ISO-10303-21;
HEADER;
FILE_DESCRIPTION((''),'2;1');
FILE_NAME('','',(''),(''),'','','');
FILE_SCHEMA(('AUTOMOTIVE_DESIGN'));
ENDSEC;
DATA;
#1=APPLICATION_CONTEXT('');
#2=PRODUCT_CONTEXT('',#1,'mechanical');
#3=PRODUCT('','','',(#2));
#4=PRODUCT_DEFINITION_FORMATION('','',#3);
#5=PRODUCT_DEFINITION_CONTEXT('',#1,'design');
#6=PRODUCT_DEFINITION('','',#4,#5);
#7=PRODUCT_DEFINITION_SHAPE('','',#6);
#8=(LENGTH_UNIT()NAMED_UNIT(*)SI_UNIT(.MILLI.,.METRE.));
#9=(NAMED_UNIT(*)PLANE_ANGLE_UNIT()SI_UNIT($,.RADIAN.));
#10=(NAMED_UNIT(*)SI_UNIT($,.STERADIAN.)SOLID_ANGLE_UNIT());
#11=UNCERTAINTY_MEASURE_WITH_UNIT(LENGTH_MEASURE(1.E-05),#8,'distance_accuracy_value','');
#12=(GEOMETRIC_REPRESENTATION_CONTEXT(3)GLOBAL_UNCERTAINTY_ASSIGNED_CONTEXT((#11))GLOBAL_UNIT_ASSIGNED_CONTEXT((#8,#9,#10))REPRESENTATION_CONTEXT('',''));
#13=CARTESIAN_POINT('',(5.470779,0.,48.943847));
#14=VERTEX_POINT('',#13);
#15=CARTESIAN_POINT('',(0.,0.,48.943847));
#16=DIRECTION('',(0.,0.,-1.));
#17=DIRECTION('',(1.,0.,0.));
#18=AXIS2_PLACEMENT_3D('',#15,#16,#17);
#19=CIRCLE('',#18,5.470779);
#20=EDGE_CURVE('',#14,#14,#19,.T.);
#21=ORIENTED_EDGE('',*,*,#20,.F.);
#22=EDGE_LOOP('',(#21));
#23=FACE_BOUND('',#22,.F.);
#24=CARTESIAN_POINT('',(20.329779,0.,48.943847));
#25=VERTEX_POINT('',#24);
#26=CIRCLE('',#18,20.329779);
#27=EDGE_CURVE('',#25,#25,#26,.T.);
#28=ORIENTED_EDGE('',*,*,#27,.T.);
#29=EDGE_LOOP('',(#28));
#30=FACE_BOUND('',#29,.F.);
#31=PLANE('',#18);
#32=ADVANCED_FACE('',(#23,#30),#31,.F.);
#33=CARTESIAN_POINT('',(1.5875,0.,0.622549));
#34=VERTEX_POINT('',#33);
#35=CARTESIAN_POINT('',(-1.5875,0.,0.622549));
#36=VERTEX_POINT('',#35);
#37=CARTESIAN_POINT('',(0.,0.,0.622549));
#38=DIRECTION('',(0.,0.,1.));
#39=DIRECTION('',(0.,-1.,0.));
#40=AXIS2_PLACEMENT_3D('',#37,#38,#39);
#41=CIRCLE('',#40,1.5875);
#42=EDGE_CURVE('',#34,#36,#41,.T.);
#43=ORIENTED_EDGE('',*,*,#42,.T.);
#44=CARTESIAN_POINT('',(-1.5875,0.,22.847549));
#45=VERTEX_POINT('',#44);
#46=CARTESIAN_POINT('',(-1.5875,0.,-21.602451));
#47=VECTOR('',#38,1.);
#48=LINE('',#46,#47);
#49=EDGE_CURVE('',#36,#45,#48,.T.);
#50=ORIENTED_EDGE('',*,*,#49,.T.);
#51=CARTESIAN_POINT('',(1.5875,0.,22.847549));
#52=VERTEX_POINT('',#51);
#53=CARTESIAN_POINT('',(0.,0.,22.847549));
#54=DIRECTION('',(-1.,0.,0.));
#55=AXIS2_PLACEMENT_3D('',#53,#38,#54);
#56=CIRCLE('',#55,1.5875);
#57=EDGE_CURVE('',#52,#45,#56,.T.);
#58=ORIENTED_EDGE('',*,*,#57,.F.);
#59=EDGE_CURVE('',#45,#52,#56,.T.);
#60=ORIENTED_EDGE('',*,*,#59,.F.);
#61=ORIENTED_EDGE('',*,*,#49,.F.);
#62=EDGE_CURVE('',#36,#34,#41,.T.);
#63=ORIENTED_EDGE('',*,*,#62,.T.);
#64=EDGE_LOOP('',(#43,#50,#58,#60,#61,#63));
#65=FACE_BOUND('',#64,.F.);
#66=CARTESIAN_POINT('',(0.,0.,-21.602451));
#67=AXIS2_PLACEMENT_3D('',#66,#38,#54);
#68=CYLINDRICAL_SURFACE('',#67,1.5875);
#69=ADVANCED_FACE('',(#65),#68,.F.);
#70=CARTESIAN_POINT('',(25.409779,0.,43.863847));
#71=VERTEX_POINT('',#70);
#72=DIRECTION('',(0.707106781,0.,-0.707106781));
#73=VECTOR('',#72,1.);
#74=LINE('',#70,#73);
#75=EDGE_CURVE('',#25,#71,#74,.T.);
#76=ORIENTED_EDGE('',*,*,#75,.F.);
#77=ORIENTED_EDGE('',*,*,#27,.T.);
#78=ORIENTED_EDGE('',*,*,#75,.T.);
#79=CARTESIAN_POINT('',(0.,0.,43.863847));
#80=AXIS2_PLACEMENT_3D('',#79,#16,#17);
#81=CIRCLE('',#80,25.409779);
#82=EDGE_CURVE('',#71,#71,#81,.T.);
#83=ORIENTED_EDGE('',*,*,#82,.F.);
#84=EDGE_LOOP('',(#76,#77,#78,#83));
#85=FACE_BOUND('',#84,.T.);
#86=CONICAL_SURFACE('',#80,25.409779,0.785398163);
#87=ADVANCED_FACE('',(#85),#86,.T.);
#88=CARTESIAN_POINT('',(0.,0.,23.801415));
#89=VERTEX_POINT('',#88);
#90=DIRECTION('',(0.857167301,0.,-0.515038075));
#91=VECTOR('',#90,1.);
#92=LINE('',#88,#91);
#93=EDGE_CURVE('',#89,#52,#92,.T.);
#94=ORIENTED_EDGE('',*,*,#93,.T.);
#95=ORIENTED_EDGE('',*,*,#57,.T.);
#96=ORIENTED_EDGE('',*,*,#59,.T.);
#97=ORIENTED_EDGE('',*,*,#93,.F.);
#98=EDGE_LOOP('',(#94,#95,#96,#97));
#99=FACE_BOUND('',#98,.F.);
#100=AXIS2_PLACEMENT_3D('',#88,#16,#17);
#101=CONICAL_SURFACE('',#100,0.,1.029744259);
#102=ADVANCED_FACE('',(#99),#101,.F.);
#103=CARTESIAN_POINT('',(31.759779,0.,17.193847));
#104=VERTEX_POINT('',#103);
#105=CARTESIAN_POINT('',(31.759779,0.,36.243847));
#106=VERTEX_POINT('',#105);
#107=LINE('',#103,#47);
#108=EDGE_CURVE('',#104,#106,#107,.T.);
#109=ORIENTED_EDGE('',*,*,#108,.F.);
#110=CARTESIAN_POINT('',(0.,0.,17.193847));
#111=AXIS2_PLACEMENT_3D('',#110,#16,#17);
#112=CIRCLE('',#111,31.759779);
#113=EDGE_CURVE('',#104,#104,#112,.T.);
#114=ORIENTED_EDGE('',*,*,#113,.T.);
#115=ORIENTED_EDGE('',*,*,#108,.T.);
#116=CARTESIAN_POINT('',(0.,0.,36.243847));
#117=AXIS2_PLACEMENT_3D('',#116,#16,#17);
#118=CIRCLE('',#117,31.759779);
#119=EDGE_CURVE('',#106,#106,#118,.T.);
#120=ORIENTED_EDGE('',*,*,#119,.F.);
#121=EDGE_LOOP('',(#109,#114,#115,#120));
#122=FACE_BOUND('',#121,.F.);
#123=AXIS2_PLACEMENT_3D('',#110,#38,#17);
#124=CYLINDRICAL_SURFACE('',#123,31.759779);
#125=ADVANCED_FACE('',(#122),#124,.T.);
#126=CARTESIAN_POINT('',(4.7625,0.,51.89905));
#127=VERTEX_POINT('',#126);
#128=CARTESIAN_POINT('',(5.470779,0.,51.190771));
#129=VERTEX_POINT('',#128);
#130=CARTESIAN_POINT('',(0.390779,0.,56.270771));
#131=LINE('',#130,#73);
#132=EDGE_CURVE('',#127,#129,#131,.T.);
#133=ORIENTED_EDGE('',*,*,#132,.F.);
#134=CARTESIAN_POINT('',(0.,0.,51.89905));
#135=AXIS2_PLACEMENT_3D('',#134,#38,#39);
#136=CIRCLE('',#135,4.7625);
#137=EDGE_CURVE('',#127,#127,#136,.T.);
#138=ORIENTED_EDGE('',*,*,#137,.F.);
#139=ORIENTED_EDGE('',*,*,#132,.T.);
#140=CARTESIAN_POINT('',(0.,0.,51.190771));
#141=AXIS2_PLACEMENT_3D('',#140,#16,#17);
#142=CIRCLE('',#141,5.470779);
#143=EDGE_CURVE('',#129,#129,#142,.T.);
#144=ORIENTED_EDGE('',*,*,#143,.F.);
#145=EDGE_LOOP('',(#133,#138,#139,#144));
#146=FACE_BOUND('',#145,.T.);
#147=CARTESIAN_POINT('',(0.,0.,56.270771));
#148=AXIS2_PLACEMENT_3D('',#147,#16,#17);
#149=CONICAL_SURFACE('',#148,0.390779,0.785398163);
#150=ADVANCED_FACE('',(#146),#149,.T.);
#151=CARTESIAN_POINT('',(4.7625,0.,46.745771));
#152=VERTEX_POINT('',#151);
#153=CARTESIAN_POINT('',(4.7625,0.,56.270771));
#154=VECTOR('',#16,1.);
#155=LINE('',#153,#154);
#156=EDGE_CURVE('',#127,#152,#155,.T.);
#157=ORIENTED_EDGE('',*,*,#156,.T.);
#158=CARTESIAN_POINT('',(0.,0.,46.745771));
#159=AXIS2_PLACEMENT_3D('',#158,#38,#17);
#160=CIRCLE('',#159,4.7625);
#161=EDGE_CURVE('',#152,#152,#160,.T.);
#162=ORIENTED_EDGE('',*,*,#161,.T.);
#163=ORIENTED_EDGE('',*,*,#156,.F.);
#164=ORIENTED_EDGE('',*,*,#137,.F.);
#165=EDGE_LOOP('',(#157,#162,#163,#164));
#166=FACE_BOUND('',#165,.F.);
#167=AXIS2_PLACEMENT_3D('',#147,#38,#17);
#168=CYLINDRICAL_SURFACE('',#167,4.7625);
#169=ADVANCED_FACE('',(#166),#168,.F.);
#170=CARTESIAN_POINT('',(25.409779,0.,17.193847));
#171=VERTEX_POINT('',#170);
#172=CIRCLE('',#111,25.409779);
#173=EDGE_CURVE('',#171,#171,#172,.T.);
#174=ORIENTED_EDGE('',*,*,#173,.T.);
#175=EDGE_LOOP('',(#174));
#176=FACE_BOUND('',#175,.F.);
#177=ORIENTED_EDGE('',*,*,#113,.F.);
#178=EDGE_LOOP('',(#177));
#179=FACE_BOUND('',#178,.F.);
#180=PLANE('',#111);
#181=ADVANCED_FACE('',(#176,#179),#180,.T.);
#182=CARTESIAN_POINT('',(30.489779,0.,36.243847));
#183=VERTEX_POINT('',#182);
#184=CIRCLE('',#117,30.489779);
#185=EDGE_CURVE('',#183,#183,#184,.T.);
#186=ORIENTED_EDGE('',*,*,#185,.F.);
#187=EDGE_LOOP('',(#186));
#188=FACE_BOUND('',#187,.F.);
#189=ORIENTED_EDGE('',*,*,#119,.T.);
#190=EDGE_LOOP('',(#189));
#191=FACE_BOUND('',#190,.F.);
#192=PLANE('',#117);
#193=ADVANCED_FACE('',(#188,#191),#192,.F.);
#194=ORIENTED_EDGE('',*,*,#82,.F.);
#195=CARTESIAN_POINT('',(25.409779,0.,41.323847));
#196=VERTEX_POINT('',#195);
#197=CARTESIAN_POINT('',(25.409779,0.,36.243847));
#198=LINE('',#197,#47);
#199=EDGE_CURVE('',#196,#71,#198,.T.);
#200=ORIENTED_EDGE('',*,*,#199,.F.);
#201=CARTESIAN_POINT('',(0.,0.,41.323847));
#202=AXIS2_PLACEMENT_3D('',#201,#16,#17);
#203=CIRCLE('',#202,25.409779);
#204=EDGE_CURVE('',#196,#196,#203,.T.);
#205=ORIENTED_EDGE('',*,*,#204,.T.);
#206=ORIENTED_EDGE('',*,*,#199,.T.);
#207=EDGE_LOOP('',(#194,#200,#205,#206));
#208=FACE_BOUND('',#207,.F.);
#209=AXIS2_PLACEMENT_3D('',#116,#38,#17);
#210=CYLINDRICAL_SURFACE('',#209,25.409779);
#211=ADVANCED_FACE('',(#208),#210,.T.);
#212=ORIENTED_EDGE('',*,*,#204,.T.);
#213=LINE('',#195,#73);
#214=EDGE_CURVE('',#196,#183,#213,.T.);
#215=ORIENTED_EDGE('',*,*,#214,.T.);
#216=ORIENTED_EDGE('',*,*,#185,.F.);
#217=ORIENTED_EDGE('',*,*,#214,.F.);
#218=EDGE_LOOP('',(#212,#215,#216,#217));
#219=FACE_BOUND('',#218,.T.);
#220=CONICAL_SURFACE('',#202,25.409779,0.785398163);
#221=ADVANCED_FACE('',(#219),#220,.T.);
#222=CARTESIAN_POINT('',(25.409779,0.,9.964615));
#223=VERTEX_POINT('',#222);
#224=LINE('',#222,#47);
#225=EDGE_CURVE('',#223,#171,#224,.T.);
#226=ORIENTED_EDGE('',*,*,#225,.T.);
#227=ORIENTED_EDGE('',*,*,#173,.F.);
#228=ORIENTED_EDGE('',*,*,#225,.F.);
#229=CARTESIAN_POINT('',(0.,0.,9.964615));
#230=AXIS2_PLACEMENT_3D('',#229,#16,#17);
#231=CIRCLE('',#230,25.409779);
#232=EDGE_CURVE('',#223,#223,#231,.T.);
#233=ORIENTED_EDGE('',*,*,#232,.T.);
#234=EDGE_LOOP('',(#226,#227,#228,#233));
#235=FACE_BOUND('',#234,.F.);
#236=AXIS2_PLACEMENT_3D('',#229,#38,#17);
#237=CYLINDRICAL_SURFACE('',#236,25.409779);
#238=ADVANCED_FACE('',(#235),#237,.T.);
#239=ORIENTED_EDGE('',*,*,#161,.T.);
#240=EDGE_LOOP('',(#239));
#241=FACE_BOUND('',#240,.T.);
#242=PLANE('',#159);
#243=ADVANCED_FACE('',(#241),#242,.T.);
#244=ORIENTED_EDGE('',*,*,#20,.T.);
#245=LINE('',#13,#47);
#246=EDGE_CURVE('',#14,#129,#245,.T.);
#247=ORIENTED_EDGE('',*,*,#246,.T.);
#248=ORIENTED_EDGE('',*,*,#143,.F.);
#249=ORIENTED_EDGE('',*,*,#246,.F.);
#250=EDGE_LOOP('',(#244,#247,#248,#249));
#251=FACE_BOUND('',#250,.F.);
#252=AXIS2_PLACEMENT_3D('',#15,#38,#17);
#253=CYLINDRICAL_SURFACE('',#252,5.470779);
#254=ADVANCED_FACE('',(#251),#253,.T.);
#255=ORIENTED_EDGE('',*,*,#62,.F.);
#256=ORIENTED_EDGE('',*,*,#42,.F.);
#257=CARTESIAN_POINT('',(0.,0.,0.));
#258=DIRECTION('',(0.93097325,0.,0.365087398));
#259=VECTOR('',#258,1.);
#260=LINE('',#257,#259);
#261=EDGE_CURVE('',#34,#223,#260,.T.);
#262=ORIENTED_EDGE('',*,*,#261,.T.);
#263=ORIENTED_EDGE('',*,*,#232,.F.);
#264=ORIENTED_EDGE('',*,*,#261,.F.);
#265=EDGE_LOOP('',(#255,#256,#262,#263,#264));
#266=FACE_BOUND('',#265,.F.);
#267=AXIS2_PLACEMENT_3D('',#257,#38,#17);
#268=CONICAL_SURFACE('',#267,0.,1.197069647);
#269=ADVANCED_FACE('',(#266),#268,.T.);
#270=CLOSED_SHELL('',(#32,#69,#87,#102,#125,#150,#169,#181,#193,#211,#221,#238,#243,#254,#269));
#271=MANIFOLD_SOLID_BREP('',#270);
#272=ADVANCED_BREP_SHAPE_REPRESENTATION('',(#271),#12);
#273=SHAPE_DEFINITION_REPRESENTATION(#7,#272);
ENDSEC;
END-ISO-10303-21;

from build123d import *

# Parameters (mm, degrees)
F2_R     = 4.7625
F3_DEPTH = 9.525
F6_D     = 3.175
F6_DEPTH = 22.225
F6_START = 0.6225488
F6_TIP   = 0.9538662327
F7_SIZE  = 5.08


# Not quite as in the source:
# - a fillet or chamfer that OpenCascade refuses, or shapes differently, is made with other operations: its cross-section is extruded or revolved along the edge and cut away or added


with BuildPart() as f1:
    # F0 (on Front) → F1 (revolve)
    with BuildSketch(Plane.XZ):
        Polygon((5.470779, 56.2707707286), (0, 56.2707707286), (0, 0), (25.409779, 9.9646151066), (25.409779, 17.1938474178), (31.759779, 17.1938474178), (31.759779, 36.2438474178), (25.409779, 36.2438474178), (25.409779, 48.9438474178), (5.470779, 48.9438474178), align=None)
    revolve(axis=Axis((0, 0, 28.1353853643), (0, 0, -1)))

    # F2 (on face) → F3 (cut)
    with BuildSketch(Plane.XY.offset(56.2707707286)):
        Circle(F2_R)
    extrude(amount=-F3_DEPTH, mode=Mode.SUBTRACT)

    # F4: chamfer of 5.08 on 1 edges, made by hand

    # F4_s1 → F4_t2 (revolve, cut)
    with BuildSketch(Plane.XZ):
        Polygon((0.390779, 56.2707707286), (5.470779, 51.1907707286), (5.470779, 56.2707707286), align=None)
    revolve(axis=Axis((0, 0, 56.2707707286), (0, 0, -1)), mode=Mode.SUBTRACT)

    # F6
    # its depths count from where the whole tool has entered the part; down to there all is cleared
    with Locations(Plane(origin=(0, 0, 0), x_dir=(1, 0, 0), z_dir=(0, 0, -1)).offset(-F6_START)):
        with Locations((0, 0)):
            Hole(F6_D / 2, depth=F6_DEPTH)
            with Locations((0, 0, -(F6_DEPTH + F6_TIP / 2))):  # 118° drill point
                Cone(0, F6_D / 2, F6_TIP, mode=Mode.SUBTRACT)

    # F7
    f7_edges = [f1.edges().sort_by_distance(p)[0] for p in [
        (-25.409779, 0, 36.243847),
        (-25.409779, 0, 48.943847),
        (25.409779, 0, 42.593847),
    ]]
    chamfer(f7_edges, length=F7_SIZE)


solid = f1.part
